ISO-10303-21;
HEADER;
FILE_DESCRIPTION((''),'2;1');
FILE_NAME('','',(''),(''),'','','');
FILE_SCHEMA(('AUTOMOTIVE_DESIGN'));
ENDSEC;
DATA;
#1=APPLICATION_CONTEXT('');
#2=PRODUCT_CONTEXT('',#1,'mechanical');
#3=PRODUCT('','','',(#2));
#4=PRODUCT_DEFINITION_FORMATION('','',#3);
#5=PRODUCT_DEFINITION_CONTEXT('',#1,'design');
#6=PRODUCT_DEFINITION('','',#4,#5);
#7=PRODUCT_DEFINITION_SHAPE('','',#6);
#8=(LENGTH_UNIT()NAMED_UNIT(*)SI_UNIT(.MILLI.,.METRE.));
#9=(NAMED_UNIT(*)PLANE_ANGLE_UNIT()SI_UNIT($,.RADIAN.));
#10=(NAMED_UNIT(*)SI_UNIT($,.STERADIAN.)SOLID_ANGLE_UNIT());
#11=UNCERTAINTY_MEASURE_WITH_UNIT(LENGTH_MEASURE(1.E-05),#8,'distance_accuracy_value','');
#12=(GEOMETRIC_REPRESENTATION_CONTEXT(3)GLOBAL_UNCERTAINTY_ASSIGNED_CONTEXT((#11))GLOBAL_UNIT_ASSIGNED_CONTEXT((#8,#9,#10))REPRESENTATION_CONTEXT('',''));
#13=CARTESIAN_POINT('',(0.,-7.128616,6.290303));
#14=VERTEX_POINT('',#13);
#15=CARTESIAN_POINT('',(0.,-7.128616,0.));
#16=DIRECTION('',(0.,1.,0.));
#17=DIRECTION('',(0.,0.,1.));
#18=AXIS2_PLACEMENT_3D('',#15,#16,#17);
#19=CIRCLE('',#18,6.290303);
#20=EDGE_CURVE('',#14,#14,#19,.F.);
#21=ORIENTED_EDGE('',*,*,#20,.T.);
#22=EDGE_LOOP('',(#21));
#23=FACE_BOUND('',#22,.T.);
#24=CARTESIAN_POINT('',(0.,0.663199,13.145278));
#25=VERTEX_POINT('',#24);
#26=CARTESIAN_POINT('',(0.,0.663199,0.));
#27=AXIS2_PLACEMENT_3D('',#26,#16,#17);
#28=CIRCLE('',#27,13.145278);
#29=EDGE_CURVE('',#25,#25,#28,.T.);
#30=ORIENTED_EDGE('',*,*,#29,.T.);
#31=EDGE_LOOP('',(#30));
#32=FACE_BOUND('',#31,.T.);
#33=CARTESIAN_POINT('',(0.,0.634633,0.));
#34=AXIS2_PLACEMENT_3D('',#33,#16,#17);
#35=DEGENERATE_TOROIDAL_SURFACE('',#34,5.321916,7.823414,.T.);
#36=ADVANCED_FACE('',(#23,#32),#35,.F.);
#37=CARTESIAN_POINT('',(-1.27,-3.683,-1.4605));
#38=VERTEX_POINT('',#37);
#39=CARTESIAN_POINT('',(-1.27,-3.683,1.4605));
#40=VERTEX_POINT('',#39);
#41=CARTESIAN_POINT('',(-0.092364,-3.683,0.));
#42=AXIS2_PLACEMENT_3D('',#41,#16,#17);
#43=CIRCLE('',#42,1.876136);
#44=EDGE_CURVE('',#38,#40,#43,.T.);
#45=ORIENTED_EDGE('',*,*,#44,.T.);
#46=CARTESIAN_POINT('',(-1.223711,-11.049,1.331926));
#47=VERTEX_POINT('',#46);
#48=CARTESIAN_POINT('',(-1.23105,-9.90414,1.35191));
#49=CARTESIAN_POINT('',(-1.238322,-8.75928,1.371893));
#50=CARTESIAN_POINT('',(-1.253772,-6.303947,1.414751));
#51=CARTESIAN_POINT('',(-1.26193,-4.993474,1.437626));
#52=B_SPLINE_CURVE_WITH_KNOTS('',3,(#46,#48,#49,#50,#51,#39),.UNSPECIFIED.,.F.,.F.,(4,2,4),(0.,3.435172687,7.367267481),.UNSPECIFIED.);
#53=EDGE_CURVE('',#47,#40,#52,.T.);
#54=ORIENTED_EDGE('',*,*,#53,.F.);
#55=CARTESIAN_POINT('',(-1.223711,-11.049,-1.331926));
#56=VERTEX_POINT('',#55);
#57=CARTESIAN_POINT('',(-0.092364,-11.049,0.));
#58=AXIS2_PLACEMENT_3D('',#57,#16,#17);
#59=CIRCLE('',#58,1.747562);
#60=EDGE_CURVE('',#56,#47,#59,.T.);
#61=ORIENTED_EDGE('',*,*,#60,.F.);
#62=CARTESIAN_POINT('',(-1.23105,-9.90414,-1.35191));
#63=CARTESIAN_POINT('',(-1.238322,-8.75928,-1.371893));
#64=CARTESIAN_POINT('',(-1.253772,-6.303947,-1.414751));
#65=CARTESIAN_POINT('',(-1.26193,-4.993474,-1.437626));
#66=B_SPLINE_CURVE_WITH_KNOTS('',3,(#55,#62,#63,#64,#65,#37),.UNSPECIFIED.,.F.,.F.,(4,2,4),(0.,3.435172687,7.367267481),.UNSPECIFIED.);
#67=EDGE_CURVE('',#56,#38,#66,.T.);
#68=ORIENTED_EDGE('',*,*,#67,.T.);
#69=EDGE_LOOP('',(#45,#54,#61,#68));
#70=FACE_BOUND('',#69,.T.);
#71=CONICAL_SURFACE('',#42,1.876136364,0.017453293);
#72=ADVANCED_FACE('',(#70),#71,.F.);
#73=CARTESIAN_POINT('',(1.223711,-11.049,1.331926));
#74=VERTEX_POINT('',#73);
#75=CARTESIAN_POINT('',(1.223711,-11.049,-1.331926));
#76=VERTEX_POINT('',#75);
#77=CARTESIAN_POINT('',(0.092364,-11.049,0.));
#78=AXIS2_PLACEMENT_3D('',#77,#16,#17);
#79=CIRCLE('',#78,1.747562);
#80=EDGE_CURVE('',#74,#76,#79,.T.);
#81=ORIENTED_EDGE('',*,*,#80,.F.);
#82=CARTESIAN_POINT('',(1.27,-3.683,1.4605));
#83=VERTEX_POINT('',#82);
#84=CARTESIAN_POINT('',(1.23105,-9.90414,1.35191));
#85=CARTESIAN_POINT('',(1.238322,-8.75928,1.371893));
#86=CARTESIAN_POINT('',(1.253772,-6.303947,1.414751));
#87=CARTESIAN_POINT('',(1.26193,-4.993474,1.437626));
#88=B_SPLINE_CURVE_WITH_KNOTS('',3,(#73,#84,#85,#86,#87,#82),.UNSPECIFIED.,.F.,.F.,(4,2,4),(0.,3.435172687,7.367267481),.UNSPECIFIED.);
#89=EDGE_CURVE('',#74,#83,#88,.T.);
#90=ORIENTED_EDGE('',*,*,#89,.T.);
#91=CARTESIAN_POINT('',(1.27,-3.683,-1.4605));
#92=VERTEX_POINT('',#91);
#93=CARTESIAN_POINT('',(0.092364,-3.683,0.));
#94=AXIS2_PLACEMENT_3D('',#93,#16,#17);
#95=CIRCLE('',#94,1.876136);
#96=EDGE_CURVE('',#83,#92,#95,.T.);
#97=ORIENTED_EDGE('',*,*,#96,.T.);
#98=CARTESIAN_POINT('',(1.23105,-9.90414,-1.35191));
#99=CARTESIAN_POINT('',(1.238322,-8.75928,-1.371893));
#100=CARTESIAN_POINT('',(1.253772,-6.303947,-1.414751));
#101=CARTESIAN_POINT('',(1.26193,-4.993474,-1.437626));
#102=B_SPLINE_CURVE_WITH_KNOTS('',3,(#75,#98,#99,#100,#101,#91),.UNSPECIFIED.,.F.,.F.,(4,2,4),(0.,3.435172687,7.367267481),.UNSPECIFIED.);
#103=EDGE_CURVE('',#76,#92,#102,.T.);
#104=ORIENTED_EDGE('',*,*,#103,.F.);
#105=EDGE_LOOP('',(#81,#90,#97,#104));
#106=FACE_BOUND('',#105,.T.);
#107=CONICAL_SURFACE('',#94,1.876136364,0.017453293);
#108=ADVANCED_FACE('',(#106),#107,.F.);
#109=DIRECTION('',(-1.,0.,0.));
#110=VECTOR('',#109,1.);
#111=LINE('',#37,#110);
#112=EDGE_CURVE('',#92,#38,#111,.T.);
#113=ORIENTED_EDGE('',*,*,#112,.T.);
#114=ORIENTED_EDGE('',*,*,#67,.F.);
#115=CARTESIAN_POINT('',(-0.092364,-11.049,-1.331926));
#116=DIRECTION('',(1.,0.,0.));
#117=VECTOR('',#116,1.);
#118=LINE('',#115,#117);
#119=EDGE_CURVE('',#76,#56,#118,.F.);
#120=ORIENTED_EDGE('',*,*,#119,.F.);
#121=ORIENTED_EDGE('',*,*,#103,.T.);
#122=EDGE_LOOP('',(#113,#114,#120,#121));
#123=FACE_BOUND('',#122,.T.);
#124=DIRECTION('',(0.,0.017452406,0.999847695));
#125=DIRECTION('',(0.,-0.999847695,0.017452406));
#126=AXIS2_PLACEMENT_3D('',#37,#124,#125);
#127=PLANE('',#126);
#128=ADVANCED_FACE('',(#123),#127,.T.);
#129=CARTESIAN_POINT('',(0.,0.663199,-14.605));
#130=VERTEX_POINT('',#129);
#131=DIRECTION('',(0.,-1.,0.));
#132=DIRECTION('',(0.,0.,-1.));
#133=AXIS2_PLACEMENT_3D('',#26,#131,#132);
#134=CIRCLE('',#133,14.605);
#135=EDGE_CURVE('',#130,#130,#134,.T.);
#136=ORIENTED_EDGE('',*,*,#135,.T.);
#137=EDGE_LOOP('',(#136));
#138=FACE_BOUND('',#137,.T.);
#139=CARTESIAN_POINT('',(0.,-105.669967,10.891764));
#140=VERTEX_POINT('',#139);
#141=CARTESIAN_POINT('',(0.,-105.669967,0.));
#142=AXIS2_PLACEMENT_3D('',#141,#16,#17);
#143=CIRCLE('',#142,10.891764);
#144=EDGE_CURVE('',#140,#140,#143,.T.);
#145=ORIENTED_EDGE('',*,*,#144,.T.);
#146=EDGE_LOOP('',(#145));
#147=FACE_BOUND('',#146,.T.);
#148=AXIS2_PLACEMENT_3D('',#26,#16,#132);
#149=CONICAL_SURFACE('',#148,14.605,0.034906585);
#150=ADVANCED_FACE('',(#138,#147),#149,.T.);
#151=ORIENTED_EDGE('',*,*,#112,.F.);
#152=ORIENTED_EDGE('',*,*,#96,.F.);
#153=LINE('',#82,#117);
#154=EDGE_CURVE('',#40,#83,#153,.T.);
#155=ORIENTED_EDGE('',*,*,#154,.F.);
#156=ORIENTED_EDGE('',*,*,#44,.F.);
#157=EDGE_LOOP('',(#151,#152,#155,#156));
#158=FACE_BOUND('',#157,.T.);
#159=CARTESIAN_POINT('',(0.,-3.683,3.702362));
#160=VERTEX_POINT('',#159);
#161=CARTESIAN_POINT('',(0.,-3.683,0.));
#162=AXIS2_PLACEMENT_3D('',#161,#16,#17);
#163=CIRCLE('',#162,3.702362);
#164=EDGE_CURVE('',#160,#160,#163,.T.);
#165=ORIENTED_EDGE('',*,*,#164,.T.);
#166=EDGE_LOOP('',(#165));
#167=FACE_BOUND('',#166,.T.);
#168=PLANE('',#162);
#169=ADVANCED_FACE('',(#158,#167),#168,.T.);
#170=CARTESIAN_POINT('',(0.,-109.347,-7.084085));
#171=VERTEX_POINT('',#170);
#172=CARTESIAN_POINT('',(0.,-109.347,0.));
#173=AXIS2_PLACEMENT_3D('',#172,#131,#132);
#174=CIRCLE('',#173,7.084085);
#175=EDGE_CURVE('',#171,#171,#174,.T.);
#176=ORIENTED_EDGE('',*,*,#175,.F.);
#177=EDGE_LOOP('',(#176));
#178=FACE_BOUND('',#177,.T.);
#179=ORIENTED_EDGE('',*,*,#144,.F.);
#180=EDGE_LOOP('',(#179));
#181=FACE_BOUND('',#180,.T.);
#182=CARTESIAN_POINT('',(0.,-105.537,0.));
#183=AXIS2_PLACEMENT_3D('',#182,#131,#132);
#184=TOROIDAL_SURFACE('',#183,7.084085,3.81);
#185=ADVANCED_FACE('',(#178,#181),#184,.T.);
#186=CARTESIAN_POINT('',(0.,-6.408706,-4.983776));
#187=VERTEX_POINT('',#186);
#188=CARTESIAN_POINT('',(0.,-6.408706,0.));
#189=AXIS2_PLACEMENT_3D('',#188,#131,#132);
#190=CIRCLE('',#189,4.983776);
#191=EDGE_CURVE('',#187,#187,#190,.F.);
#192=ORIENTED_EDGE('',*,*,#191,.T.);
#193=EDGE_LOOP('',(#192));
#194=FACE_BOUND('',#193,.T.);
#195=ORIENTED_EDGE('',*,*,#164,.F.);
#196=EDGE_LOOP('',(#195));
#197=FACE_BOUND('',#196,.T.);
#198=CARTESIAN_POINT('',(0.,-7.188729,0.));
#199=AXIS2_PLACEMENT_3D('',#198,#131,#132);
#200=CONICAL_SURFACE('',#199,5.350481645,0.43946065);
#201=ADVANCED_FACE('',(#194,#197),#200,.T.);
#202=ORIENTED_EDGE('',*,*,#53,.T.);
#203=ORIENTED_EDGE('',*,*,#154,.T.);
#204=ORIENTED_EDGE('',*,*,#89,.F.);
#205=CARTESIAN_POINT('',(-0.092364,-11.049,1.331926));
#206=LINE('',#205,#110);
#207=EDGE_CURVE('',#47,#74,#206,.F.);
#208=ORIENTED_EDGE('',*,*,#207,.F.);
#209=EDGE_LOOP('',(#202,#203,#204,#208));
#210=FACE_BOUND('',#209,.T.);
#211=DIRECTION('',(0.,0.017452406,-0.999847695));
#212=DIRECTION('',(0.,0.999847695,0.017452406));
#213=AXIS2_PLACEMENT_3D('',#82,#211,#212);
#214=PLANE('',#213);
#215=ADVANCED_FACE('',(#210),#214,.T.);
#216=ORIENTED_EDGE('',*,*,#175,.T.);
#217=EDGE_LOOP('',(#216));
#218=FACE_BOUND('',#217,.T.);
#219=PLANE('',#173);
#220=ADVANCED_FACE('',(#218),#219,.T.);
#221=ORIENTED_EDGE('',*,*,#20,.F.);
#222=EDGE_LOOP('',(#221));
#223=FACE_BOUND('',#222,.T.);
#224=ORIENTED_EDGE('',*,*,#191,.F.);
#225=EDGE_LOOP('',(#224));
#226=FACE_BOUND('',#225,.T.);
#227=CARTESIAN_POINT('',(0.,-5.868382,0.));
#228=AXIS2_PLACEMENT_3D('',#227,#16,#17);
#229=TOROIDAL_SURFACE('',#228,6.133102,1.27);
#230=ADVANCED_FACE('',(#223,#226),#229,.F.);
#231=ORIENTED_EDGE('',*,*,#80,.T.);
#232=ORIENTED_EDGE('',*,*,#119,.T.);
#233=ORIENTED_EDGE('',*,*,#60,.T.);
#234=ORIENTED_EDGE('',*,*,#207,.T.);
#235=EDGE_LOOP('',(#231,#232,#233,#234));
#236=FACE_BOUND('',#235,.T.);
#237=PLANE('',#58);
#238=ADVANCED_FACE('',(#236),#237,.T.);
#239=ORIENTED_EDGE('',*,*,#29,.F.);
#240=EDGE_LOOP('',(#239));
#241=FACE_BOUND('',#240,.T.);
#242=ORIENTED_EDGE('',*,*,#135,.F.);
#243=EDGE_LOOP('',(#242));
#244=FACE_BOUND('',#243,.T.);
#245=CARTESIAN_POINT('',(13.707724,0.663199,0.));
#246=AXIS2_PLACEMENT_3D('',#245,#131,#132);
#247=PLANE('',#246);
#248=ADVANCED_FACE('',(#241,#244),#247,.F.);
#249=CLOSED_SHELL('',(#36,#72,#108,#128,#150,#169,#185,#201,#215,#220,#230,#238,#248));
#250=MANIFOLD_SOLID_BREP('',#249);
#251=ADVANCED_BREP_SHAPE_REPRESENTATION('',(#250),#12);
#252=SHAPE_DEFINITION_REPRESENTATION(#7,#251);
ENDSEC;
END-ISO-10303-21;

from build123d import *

# Parameters (mm, degrees)
SKETCH4_R           = 5.350481645
CUT_EXTRUDE2_DEPTH  = 3.683
FILLET1_R           = 1.27
SKETCH5_R           = 14.605
BOSS_EXTRUDE2_DEPTH = 101.6
BOSS_EXTRUDE3_START = 8.41019865
SKETCH6_R           = 14.605
SKETCH6_R_2         = 13.707723638
BOSS_EXTRUDE3_DEPTH = 8.41019865
DRAFT2_ANGLE        = -2
FILLET2_R           = 3.81
CUT_EXTRUDE3_DEPTH  = 7.366
DRAFT3_ANGLE        = 1


# Read off the part's stored shape, not the designer's step: Boss-Extrude1
with BuildPart() as part:
    # Sketch1 → Revolve1 (revolve)
    with BuildSketch(Plane.XY, mode=Mode.PRIVATE) as revolve1_sk:
        with BuildLine():
            Line((0, 0), (0, -7.747))
            Line((0, -7.747), (5.588, -7.747))
            ThreePointArc((5.588, -7.747), (11.354881185, -5.189962282), (13.707723638, 0.66319865))
            Line((13.707723638, 0.66319865), (13.145278313, 0.66319865))
            ThreePointArc((13.145278313, 0.66319865), (10.874067339, -4.877120177), (5.350481645, -7.188728508))
            Line((5.350481645, -7.188728508), (3.466052478, -3.180343574))
            Line((3.466052478, -3.180343574), (3.466052478, 0))
            Line((3.466052478, 0), (0, 0))
        make_face()
    revolve(revolve1_sk.sketch.rotate(Axis((0, 0, 0), (0, -1, 0)), 90), axis=Axis((0, 0, 0), (0, -1, 0)))

    # Boss-Extrude1 outline → Boss-Extrude1 (revolve)
    with BuildSketch(Plane.XY):
        with BuildLine():
            Line((13.707723638, -7.747), (13.707723638, 0.606068215))
            ThreePointArc((13.707723638, 0.606068215), (11.335005533, -5.21047892), (5.588, -7.747))
            Line((5.588, -7.747), (13.707723638, -7.747))
        make_face()
    revolve(axis=Axis((0, 0, 0), (0, 1, 0)))

    # Sketch4 → Cut-Extrude2 (cut)
    with BuildSketch(Plane(origin=(0, 0, 0), x_dir=(1, 0, 0), z_dir=(0, 1, 0))):
        Circle(SKETCH4_R)
    extrude(amount=-CUT_EXTRUDE2_DEPTH, mode=Mode.SUBTRACT)

    # Fillet1
    fillet1_edges = [part.edges().sort_by_distance(p)[0] for p in [
        (0, -7.188728508, -5.350481645),
    ]]
    fillet(fillet1_edges, radius=FILLET1_R)

    # Sketch5 → Boss-Extrude2 (add)
    with BuildSketch(Plane.XZ.offset(7.747)):
        with Locations(Location((0, 0, 0), (0, 0, 270))):
            Circle(SKETCH5_R)
    extrude(amount=BOSS_EXTRUDE2_DEPTH)

    # Sketch6 → Boss-Extrude3 (add)
    with BuildSketch(Plane(origin=(0, -7.747, 0), x_dir=(1, 0, 0), z_dir=(0, 1, 0)).offset(BOSS_EXTRUDE3_START)):
        with Locations(Location((0, 0, 0), (0, 0, 90))):
            Circle(SKETCH6_R)
        Circle(SKETCH6_R_2, mode=Mode.SUBTRACT)
    extrude(amount=-BOSS_EXTRUDE3_DEPTH)

    # Draft2
    draft2_faces = [part.faces().sort_by_distance(p)[0] for p in [
        (0, -54.341900675, 14.605),
    ]]
    draft(draft2_faces, Plane(origin=(13.707723638, 0.66319865, 0), x_dir=(0, 0, 1), z_dir=(0, 1, 0)), DRAFT2_ANGLE)

    # Fillet2
    fillet2_edges = [part.edges().sort_by_distance(p)[0] for p in [
        (0, -109.347, 10.763359211),
    ]]
    fillet(fillet2_edges, radius=FILLET2_R)

    # Sketch7 → Cut-Extrude3 (cut)
    with BuildSketch(Plane(origin=(0, -3.683, 0), x_dir=(1, 0, 0), z_dir=(0, 1, 0))):
        with BuildLine():
            Line((1.27, -1.4605), (-1.27, -1.4605))
            ThreePointArc((-1.27, -1.4605), (-1.9685, 0), (-1.27, 1.4605))
            Line((-1.27, 1.4605), (1.27, 1.4605))
            ThreePointArc((1.27, 1.4605), (1.9685, 0), (1.27, -1.4605))
        make_face()
    extrude(amount=-CUT_EXTRUDE3_DEPTH, mode=Mode.SUBTRACT)

    # Draft3
    draft3_faces = [part.faces().sort_by_distance(p)[0] for p in [
        (-1.9685, -7.366, 0),
        (0, -7.366, -1.4605),
        (0, -7.366, 1.4605),
        (1.9685, -7.366, 0),
    ]]
    draft(draft3_faces, Plane.ZX.offset(-3.683), DRAFT3_ANGLE)


solid = part.part
